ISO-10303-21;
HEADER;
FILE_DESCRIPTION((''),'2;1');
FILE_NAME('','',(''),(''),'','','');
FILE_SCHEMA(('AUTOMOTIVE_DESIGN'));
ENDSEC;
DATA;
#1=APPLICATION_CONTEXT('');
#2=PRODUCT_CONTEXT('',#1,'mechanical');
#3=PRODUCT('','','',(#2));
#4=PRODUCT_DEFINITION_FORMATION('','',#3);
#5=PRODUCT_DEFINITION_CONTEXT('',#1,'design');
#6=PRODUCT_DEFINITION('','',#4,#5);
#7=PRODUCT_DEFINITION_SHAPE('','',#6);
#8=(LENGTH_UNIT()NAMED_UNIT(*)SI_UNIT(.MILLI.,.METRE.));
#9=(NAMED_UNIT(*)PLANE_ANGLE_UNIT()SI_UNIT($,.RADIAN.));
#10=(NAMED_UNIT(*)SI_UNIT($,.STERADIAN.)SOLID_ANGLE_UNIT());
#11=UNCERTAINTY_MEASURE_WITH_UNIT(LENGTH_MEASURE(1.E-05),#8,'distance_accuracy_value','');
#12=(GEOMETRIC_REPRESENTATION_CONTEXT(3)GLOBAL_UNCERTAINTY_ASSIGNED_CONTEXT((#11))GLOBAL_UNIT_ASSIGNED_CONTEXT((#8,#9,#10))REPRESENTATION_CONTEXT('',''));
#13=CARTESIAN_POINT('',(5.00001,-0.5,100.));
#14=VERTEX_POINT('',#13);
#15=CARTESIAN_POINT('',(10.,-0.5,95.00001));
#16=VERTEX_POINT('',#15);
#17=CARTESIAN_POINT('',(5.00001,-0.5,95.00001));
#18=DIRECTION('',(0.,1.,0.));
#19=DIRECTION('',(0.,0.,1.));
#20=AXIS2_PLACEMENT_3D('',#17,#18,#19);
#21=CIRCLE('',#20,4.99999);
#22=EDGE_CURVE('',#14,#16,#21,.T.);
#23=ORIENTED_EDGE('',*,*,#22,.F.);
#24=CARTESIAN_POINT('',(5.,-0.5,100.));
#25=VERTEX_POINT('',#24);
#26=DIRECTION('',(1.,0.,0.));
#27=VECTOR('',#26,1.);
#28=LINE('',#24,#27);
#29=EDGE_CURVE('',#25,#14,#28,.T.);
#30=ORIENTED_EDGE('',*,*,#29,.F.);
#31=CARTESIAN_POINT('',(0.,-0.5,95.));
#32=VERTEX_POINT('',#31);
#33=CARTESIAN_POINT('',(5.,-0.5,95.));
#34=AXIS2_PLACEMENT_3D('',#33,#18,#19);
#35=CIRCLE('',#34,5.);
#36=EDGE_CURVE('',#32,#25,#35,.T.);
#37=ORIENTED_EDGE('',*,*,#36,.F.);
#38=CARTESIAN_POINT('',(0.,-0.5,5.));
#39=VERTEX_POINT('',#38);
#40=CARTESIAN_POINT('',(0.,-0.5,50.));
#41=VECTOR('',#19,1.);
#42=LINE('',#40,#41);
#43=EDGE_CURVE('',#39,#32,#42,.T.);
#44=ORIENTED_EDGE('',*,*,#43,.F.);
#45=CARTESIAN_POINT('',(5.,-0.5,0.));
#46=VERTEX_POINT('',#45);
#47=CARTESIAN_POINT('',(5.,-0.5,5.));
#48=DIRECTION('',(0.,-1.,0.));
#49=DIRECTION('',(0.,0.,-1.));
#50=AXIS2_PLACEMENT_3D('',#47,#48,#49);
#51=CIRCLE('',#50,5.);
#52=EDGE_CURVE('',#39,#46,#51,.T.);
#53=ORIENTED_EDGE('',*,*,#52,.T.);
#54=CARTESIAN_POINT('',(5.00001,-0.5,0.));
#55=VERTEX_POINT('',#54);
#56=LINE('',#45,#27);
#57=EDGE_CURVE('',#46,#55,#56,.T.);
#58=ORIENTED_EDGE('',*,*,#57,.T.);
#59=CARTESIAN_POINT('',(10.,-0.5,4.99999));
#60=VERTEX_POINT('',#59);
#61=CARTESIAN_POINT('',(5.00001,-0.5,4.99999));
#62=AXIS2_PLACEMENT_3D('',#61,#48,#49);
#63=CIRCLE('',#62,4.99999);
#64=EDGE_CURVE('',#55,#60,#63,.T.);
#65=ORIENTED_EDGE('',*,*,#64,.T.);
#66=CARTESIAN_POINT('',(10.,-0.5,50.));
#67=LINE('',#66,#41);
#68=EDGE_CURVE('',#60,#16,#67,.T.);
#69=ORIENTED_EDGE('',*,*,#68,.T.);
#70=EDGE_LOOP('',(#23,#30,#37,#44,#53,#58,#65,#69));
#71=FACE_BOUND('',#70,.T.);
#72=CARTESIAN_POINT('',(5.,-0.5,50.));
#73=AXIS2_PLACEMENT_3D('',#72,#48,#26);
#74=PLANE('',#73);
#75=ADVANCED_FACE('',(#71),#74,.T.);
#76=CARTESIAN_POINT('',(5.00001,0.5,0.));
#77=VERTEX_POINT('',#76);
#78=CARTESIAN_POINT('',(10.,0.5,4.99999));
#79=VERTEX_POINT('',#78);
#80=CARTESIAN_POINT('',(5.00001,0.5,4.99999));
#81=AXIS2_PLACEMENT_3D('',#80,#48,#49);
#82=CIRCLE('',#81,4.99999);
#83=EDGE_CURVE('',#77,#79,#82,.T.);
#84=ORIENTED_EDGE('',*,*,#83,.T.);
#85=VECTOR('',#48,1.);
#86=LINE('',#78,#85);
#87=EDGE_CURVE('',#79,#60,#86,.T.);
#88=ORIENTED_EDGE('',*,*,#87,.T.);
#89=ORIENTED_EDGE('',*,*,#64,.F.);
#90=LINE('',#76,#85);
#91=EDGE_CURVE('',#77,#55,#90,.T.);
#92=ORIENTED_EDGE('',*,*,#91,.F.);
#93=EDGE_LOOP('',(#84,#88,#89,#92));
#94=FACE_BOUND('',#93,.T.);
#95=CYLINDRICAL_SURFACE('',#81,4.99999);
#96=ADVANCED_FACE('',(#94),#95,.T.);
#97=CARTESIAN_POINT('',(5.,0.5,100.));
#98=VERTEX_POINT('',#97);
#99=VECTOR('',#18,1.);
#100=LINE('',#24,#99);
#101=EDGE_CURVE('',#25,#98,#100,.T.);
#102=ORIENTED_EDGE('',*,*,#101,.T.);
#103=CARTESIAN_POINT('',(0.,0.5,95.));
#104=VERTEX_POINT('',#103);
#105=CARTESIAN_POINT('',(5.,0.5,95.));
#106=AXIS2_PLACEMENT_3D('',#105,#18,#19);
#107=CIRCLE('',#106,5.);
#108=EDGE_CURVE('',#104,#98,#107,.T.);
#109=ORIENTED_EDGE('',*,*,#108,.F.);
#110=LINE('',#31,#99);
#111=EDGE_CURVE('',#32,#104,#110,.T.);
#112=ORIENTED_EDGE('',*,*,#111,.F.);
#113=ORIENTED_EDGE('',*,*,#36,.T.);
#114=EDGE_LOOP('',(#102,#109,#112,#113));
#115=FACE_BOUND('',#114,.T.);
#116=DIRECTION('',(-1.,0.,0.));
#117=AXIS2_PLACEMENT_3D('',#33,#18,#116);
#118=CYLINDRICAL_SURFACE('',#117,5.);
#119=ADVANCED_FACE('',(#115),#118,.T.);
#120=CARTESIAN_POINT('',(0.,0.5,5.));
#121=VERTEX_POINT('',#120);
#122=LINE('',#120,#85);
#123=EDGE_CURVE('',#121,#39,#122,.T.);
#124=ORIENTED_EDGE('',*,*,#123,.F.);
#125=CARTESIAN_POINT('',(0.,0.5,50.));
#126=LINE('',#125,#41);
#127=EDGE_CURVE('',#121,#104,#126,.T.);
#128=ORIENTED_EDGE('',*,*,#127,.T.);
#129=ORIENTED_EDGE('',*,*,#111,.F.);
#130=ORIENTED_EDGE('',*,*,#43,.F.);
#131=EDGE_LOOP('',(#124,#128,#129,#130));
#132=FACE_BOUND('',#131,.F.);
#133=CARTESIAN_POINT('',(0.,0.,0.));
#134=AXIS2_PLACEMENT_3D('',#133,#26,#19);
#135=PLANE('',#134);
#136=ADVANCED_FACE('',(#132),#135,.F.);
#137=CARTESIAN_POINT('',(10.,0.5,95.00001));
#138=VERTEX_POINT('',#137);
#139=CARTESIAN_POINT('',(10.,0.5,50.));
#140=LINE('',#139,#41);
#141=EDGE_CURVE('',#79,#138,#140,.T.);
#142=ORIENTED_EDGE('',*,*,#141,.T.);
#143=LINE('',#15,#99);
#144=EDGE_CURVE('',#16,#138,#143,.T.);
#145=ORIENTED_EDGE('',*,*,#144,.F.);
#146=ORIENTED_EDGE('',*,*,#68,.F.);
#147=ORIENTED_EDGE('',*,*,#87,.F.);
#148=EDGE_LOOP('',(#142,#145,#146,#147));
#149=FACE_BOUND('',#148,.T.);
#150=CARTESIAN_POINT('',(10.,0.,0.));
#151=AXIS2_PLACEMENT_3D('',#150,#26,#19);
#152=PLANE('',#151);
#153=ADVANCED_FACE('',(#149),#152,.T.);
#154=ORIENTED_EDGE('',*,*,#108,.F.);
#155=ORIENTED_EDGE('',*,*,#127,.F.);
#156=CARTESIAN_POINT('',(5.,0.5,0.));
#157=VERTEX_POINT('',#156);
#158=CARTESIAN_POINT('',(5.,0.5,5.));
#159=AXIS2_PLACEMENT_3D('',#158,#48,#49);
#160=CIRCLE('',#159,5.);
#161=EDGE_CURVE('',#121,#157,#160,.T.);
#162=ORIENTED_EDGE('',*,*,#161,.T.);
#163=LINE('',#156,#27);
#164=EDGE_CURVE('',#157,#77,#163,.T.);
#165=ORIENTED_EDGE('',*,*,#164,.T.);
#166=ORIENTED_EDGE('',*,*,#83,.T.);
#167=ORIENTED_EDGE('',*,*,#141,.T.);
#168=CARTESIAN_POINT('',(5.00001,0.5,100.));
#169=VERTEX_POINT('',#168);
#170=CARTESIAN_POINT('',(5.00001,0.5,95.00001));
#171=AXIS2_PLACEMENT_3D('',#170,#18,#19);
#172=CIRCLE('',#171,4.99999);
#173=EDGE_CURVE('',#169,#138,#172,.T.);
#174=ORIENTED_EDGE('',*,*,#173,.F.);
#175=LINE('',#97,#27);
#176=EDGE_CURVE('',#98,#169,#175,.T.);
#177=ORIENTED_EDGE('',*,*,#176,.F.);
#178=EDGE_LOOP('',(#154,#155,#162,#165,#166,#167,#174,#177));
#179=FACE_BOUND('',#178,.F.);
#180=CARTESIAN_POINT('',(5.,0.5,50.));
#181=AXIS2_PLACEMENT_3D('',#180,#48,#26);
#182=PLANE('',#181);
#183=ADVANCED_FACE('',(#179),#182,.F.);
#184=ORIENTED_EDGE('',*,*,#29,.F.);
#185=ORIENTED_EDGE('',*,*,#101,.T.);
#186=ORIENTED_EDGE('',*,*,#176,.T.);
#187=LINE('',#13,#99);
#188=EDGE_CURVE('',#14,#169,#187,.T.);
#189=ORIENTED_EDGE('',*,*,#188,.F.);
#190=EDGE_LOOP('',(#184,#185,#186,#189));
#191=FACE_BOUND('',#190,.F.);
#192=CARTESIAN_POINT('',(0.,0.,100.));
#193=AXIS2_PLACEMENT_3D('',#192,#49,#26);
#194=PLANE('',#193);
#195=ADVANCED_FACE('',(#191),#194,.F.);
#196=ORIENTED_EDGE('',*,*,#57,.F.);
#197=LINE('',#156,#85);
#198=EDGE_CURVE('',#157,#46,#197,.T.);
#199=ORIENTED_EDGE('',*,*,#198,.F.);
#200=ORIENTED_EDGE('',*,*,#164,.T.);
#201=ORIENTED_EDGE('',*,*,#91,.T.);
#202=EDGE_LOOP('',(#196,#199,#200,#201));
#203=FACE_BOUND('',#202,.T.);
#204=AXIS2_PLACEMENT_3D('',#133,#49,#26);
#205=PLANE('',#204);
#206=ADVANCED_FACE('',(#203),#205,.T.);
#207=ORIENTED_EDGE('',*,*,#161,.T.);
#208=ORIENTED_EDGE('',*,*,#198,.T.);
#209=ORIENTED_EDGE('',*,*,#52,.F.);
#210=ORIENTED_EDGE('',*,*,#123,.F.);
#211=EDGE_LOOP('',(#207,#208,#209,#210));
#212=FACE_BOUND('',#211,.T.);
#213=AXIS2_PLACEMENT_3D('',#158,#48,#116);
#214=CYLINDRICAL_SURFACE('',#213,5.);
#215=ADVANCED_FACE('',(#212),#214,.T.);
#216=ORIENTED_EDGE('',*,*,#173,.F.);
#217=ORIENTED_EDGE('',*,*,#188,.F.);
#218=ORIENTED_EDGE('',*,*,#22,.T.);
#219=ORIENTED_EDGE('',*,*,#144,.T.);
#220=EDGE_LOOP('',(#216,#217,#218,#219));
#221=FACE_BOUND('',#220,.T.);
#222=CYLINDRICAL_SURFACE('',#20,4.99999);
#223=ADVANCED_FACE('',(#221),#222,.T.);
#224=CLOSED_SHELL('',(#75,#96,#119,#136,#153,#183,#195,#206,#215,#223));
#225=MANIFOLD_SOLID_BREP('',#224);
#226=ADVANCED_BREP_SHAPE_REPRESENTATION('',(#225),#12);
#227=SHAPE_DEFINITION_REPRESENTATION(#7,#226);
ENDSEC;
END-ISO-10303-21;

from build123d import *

# Parameters (mm, degrees)
F0_W     = 10
F0_H     = 100
F1_DEPTH = 0.5
F2_R     = 5
F3_R     = 4.99999
F4_R     = 5
F5_R     = 4.99999


# Not quite as in the source:
# - a fillet or chamfer is up to 0.001 mm smaller than in the source, because OpenCascade refuses the exact size


with BuildPart() as f1:
    # F0 (on Front) → F1 (new body, symmetric)
    with BuildSketch(Plane.XZ):
        with Locations((5, 50)):
            Rectangle(F0_W, F0_H)
    extrude(amount=F1_DEPTH, both=True)

    # F2
    f2_edges = [f1.edges().sort_by_distance(p)[0] for p in [
        (0, 0, 100),
    ]]
    fillet(f2_edges, radius=F2_R)

    # F3 (radius 5 in the source; OpenCascade refuses exactly that, so slightly less here)
    f3_edges = [f1.edges().sort_by_distance(p)[0] for p in [
        (10, 0, 100),
    ]]
    fillet(f3_edges, radius=F3_R)

    # F4
    f4_edges = [f1.edges().sort_by_distance(p)[0] for p in [
        (0, 0, 0),
    ]]
    fillet(f4_edges, radius=F4_R)

    # F5 (radius 5 in the source; OpenCascade refuses exactly that, so slightly less here)
    f5_edges = [f1.edges().sort_by_distance(p)[0] for p in [
        (10, 0, 0),
    ]]
    fillet(f5_edges, radius=F5_R)


solid = f1.part
